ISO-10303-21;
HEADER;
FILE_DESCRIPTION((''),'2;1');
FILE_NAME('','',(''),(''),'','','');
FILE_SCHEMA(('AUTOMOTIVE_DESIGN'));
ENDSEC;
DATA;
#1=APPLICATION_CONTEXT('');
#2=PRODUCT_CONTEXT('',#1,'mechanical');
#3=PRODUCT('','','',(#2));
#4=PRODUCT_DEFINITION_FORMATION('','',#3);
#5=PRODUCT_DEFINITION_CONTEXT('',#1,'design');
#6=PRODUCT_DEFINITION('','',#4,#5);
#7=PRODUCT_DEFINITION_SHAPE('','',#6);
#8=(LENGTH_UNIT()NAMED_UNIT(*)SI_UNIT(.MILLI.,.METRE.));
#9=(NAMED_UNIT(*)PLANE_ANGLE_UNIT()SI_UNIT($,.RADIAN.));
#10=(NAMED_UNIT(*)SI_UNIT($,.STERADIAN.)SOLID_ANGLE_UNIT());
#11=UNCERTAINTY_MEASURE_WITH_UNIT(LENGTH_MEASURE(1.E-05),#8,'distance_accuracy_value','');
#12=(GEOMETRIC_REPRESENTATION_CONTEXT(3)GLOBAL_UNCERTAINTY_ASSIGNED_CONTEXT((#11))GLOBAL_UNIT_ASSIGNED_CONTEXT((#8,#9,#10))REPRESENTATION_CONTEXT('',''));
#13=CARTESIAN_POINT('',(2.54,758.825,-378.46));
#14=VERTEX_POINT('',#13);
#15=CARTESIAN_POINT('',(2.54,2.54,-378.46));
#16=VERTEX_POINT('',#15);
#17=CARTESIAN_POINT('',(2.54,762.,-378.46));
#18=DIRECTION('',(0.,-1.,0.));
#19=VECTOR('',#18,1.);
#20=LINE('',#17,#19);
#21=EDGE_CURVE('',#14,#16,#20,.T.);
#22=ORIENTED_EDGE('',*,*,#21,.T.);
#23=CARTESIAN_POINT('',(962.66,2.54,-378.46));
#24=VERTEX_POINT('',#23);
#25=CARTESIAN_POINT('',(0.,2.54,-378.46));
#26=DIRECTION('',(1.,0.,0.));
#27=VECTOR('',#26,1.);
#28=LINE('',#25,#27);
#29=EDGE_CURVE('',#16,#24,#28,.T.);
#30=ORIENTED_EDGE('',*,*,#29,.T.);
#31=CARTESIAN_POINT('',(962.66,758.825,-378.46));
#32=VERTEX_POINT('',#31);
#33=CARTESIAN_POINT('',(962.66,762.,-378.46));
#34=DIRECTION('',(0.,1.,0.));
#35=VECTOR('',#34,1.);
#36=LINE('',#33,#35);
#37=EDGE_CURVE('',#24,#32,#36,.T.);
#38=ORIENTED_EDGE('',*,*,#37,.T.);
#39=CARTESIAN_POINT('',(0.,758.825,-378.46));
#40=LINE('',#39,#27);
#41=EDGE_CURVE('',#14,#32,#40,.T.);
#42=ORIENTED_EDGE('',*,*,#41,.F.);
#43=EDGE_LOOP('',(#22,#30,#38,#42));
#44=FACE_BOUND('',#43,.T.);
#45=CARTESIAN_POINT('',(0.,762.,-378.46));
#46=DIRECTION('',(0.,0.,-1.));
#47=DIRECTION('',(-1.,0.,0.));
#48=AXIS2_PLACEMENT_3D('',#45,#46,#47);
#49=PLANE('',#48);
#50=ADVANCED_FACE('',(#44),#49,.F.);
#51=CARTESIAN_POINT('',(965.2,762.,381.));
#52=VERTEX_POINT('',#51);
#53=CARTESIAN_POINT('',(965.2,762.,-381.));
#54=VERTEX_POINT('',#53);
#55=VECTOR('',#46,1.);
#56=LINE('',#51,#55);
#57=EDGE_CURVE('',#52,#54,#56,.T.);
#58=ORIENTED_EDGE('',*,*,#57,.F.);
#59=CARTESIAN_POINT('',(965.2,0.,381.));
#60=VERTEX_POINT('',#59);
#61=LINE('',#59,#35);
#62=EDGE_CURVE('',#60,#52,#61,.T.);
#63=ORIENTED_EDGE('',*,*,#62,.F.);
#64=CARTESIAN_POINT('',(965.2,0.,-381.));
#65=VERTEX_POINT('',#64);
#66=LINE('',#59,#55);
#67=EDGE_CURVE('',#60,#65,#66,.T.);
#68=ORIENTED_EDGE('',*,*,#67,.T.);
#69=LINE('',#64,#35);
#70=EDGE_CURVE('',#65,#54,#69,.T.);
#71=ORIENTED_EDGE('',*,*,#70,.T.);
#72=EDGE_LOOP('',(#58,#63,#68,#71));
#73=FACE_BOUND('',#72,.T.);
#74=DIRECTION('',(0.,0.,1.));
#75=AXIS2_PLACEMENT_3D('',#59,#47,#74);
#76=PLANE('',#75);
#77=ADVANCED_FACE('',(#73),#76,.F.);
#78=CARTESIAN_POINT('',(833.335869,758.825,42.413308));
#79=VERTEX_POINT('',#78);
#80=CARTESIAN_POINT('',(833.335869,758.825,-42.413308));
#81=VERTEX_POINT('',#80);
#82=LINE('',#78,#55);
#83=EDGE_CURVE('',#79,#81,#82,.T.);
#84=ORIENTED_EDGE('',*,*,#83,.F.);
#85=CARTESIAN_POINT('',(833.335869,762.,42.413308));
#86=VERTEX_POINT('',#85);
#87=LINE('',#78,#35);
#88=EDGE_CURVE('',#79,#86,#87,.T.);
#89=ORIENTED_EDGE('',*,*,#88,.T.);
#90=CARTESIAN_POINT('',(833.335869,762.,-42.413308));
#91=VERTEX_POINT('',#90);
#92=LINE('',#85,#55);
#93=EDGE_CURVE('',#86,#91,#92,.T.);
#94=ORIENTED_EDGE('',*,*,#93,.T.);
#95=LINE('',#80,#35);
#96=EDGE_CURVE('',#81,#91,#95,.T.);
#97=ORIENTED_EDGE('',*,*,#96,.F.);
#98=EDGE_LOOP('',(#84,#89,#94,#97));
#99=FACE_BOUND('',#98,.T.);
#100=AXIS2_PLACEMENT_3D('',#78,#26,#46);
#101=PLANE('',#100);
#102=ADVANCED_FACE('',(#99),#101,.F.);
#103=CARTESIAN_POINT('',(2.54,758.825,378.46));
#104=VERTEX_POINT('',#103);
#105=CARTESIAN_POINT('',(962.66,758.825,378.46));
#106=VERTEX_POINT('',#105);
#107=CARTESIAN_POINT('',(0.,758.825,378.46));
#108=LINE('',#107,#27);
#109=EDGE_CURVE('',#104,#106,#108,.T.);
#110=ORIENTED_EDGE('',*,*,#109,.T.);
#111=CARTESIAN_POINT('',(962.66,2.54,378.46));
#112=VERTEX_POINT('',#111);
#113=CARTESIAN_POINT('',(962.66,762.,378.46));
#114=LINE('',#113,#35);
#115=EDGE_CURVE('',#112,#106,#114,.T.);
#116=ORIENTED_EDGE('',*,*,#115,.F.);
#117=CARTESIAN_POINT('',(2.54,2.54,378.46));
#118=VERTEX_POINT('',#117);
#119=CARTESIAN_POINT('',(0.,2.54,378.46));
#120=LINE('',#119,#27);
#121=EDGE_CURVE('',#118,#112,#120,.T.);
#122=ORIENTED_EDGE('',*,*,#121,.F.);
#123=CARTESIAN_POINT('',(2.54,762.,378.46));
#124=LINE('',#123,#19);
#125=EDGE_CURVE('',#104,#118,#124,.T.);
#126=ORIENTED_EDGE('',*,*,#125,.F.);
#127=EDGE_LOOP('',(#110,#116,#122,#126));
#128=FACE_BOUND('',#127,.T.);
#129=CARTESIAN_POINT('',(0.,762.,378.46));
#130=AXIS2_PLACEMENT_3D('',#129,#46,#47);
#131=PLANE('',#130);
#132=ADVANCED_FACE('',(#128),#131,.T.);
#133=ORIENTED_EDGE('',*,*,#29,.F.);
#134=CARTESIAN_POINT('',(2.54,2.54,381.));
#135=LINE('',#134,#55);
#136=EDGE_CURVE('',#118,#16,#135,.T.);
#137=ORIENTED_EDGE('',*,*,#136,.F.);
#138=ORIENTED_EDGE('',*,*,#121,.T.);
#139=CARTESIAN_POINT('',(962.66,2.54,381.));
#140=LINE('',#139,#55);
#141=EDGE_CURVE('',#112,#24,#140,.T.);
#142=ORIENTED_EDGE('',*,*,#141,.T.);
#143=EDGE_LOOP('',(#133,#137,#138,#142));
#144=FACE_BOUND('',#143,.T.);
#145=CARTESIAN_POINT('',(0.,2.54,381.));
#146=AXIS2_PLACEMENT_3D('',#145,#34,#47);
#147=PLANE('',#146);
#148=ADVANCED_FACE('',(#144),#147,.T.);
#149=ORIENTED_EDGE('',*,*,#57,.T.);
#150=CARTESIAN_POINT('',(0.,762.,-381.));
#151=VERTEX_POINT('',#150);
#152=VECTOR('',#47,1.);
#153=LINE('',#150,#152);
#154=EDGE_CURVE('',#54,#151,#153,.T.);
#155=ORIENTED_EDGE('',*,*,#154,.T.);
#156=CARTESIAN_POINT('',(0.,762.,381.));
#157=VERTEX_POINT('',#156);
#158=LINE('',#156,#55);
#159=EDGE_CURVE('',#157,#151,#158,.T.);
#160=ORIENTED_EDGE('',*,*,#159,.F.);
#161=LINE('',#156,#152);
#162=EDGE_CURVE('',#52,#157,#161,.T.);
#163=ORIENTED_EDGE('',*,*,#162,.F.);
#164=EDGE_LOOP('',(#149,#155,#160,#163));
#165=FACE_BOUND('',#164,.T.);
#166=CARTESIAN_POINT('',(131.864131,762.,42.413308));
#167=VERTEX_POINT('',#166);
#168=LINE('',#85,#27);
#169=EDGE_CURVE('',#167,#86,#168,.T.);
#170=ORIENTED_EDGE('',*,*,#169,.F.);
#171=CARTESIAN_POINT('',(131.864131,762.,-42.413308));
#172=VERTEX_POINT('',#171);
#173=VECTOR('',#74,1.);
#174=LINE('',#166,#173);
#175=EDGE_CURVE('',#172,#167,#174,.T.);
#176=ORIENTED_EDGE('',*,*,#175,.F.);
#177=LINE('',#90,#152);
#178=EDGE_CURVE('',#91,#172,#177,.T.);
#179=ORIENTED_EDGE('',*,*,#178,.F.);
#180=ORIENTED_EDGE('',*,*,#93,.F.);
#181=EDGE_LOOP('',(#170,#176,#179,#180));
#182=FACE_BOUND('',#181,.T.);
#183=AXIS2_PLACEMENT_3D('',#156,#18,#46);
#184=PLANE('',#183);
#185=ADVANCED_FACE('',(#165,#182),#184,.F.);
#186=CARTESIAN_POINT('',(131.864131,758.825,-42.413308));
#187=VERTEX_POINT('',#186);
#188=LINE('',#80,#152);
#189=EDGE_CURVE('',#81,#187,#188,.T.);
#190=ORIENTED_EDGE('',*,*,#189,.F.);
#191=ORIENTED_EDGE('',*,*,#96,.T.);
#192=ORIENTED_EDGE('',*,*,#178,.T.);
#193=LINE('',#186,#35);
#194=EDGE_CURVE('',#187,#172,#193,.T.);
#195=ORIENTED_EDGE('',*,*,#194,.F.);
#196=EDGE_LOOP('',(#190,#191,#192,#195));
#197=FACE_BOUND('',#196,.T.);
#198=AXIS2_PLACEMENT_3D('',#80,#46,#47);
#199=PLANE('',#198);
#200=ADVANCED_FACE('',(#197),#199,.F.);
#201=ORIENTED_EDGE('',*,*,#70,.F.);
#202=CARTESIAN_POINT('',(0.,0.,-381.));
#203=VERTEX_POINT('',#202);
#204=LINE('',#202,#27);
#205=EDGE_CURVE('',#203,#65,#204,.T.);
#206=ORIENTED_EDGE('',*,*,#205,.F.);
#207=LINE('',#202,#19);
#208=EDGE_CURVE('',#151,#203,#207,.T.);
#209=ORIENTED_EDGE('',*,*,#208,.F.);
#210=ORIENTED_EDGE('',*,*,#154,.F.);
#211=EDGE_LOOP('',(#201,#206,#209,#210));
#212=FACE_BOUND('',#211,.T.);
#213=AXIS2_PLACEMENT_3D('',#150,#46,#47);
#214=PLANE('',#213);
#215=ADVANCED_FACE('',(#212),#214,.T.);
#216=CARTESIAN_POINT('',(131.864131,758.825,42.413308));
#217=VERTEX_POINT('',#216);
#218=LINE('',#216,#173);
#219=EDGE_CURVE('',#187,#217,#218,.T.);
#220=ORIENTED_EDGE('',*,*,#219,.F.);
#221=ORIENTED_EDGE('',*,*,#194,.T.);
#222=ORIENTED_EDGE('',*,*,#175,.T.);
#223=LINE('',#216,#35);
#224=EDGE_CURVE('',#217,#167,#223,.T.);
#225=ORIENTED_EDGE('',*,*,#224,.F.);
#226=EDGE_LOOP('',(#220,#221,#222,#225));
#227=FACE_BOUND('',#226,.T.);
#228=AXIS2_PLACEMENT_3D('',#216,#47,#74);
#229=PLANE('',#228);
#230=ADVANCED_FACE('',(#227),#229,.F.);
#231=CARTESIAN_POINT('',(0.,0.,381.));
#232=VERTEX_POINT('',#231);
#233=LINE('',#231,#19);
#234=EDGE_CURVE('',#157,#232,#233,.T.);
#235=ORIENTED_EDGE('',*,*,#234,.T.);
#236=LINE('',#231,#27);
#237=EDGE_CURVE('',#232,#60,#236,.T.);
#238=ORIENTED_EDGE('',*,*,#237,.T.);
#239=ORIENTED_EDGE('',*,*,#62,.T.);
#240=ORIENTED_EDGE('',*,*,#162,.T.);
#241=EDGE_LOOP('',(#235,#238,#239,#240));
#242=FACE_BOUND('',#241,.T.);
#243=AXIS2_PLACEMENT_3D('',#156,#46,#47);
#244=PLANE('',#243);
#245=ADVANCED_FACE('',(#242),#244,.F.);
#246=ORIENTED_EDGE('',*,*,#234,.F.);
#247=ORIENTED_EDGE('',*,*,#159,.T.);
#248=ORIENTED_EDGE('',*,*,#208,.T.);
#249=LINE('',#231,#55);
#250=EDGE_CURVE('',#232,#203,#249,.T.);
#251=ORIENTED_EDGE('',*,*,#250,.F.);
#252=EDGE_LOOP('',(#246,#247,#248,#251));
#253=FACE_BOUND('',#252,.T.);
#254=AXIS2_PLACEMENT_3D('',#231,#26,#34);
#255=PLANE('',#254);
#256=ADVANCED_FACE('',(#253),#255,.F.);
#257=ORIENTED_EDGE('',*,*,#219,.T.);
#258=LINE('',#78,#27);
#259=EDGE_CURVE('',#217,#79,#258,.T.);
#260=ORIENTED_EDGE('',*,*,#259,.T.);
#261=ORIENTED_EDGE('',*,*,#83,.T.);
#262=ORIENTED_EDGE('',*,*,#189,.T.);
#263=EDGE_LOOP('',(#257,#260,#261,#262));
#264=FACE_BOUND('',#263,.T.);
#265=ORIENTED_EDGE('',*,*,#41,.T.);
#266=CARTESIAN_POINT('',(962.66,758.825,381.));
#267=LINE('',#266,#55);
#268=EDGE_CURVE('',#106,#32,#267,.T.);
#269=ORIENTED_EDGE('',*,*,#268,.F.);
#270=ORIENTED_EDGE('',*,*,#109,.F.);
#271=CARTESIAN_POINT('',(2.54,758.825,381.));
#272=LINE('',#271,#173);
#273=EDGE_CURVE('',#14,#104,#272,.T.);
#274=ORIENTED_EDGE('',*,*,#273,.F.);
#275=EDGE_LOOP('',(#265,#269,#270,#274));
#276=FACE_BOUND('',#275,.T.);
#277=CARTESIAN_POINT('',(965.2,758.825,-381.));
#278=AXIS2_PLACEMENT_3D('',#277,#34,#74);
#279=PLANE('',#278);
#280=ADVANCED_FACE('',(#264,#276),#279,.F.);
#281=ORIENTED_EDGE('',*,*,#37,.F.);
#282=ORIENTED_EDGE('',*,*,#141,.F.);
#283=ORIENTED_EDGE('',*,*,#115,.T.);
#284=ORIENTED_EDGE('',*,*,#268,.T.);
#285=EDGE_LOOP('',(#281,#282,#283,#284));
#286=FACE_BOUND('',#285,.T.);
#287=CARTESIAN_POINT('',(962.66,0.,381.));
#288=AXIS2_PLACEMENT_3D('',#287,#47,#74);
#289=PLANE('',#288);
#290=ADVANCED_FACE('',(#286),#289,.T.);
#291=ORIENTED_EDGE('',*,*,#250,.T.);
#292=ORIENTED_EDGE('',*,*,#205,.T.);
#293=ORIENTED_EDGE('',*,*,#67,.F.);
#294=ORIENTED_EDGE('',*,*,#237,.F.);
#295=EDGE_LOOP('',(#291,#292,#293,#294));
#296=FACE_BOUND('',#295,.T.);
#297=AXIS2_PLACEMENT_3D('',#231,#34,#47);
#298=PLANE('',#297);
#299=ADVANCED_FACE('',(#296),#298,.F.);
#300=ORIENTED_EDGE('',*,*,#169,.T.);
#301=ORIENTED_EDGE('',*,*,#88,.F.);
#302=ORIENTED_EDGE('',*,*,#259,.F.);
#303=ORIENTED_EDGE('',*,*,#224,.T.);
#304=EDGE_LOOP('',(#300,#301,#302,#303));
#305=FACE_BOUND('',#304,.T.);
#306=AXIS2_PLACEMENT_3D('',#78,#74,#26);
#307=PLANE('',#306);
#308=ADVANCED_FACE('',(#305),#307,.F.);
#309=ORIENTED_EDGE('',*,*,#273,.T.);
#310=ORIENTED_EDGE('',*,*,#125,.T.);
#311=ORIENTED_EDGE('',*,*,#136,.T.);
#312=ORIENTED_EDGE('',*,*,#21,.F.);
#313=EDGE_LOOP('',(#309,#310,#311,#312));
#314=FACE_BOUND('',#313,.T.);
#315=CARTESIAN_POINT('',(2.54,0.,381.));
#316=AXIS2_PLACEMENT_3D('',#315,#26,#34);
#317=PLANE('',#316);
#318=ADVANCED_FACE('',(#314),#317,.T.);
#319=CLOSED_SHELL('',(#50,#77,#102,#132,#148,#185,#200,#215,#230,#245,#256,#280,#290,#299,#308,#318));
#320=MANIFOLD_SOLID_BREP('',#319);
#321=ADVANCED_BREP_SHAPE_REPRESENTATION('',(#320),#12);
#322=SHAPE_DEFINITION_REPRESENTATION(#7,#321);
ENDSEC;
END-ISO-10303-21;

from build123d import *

# Parameters (mm, degrees)
EXTRUDE1_START     = -381
EXTRUDE1_OUTLINE_W = 965.2
EXTRUDE1_OUTLINE_H = 762
EXTRUDE1_DEPTH     = 762
SHELL1_T           = -2.54
SKETCH3_W          = 965.2
SKETCH3_H          = 762
SKETCH3_W_2        = 701.471738738
SKETCH3_H_2        = 84.826616214
EXTRUDE2_DEPTH     = 3.175


# Read off the part's stored shape, not the designer's step: Extrude1
with BuildPart() as part:
    # Extrude1 outline → Extrude1 (new body)
    with BuildSketch(Plane.XY.offset(EXTRUDE1_START)):
        with Locations((482.6, 381)):
            Rectangle(EXTRUDE1_OUTLINE_W, EXTRUDE1_OUTLINE_H)
    extrude(amount=EXTRUDE1_DEPTH)

    # Shell1
    shell1_openings = [part.faces().sort_by_distance(p)[0] for p in [
        (482.6, 762, 0),
    ]]
    offset(amount=SHELL1_T, openings=shell1_openings, kind=Kind.INTERSECTION)

    # Sketch3 → Extrude2 (add)
    with BuildSketch(Plane(origin=(0, 762, 0), x_dir=(-1, 0, 0), z_dir=(0, 1, 0))):
        with Locations((-482.6, 0)):
            Rectangle(SKETCH3_W, SKETCH3_H)
        with Locations((-482.6, 0)):
            Rectangle(SKETCH3_W_2, SKETCH3_H_2, mode=Mode.SUBTRACT)
    extrude(amount=-EXTRUDE2_DEPTH)


solid = part.part
